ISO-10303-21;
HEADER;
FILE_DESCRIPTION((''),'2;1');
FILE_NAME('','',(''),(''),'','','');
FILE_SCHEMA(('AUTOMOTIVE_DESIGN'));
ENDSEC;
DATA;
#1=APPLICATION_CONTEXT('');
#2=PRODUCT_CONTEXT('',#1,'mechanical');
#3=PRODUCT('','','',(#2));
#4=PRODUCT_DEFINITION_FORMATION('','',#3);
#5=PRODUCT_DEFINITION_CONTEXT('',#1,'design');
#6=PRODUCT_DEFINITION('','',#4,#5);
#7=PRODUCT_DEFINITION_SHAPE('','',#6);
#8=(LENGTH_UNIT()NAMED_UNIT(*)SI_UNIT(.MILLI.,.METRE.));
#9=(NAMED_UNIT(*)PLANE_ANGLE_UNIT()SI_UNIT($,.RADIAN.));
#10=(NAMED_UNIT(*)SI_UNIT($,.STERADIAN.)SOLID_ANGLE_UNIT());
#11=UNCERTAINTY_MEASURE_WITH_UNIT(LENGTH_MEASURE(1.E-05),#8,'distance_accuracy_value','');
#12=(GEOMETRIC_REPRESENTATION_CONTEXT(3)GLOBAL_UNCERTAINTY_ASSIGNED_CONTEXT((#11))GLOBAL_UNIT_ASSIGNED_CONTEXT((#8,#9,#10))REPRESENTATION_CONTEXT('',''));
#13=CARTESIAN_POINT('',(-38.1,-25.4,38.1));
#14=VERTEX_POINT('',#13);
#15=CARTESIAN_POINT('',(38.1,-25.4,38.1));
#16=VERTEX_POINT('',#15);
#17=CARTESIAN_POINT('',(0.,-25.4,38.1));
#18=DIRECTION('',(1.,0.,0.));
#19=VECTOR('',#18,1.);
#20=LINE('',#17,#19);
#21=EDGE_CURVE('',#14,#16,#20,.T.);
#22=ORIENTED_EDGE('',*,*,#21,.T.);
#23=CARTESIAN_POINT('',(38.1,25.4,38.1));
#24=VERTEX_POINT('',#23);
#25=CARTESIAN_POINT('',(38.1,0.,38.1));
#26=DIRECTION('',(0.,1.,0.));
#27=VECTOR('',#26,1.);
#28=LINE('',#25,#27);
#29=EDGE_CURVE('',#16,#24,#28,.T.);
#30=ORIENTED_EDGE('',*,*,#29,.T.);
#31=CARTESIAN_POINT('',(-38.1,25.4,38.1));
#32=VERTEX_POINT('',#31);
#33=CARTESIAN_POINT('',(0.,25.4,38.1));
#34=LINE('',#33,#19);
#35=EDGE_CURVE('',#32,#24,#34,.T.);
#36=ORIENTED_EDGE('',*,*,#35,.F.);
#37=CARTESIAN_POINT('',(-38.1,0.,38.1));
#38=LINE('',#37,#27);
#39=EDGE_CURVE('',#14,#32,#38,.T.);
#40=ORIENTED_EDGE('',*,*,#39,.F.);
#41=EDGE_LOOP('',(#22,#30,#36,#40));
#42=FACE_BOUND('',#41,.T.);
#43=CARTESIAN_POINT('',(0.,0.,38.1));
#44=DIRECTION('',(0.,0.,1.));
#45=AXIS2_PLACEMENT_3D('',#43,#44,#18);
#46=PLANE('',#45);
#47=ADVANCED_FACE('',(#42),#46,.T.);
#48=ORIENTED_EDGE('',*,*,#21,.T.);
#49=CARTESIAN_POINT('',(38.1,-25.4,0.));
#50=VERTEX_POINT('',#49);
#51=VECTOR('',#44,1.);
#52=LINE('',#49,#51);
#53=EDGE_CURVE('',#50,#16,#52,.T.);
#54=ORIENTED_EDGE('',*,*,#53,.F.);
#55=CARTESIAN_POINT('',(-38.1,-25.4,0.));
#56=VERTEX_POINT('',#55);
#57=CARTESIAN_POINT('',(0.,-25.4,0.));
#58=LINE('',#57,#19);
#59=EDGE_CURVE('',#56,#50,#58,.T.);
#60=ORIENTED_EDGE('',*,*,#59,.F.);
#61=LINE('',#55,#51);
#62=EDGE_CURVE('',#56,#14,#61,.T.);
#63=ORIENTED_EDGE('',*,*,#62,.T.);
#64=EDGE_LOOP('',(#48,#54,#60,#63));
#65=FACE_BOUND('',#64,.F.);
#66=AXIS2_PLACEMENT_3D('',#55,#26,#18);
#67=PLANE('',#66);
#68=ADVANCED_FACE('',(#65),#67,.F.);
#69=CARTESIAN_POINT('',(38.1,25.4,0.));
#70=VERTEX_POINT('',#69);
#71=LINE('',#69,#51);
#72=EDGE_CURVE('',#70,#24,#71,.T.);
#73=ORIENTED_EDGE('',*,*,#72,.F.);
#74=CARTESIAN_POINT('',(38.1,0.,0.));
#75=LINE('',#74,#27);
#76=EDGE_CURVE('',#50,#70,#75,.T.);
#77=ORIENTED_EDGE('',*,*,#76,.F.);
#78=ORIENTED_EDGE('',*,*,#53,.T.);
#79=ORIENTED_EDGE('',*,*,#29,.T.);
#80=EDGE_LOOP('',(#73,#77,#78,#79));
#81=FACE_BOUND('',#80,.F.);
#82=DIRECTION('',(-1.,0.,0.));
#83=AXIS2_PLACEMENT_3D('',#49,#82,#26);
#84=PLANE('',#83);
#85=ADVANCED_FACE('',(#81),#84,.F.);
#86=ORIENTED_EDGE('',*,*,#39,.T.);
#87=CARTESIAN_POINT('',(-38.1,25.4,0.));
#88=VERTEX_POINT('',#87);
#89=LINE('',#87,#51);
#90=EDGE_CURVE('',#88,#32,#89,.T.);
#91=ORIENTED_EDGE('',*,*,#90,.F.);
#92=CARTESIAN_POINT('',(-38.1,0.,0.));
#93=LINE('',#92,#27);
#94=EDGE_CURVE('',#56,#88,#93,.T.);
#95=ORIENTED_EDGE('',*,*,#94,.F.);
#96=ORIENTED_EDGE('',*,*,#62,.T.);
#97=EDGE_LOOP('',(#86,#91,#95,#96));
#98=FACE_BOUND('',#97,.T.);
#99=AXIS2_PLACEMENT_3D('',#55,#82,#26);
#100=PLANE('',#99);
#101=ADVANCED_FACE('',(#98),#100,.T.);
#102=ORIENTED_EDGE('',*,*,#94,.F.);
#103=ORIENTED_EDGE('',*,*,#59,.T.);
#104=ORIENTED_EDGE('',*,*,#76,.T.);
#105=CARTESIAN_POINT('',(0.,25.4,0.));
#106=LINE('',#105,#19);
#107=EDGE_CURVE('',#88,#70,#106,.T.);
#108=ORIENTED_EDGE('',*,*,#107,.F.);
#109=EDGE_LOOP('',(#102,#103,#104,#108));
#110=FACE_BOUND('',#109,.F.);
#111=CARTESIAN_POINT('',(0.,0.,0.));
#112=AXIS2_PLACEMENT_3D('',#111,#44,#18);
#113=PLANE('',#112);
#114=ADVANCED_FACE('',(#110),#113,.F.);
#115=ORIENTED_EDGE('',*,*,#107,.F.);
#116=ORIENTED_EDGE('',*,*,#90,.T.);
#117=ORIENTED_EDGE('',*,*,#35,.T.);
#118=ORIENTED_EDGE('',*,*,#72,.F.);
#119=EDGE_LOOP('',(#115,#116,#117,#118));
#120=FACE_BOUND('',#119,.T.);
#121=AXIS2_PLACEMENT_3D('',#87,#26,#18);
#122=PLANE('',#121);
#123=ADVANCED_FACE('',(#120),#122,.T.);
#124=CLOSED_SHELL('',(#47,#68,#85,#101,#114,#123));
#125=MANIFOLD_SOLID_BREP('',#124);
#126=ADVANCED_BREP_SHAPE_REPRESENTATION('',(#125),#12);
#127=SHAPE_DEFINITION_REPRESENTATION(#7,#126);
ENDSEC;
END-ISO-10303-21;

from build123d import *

# Parameters (mm, degrees)
F0_W     = 76.2
F0_H     = 50.8
F1_DEPTH = 38.1


# Not quite as in the source:
# - a feature of the source that left no trace in its solid (it failed there, or was rolled back) is left out


with BuildPart() as f1:
    # F0 (on Top) → F1 (new body)
    with BuildSketch(Plane.XY):
        Rectangle(F0_W, F0_H)
    extrude(amount=F1_DEPTH)


solid = f1.part
